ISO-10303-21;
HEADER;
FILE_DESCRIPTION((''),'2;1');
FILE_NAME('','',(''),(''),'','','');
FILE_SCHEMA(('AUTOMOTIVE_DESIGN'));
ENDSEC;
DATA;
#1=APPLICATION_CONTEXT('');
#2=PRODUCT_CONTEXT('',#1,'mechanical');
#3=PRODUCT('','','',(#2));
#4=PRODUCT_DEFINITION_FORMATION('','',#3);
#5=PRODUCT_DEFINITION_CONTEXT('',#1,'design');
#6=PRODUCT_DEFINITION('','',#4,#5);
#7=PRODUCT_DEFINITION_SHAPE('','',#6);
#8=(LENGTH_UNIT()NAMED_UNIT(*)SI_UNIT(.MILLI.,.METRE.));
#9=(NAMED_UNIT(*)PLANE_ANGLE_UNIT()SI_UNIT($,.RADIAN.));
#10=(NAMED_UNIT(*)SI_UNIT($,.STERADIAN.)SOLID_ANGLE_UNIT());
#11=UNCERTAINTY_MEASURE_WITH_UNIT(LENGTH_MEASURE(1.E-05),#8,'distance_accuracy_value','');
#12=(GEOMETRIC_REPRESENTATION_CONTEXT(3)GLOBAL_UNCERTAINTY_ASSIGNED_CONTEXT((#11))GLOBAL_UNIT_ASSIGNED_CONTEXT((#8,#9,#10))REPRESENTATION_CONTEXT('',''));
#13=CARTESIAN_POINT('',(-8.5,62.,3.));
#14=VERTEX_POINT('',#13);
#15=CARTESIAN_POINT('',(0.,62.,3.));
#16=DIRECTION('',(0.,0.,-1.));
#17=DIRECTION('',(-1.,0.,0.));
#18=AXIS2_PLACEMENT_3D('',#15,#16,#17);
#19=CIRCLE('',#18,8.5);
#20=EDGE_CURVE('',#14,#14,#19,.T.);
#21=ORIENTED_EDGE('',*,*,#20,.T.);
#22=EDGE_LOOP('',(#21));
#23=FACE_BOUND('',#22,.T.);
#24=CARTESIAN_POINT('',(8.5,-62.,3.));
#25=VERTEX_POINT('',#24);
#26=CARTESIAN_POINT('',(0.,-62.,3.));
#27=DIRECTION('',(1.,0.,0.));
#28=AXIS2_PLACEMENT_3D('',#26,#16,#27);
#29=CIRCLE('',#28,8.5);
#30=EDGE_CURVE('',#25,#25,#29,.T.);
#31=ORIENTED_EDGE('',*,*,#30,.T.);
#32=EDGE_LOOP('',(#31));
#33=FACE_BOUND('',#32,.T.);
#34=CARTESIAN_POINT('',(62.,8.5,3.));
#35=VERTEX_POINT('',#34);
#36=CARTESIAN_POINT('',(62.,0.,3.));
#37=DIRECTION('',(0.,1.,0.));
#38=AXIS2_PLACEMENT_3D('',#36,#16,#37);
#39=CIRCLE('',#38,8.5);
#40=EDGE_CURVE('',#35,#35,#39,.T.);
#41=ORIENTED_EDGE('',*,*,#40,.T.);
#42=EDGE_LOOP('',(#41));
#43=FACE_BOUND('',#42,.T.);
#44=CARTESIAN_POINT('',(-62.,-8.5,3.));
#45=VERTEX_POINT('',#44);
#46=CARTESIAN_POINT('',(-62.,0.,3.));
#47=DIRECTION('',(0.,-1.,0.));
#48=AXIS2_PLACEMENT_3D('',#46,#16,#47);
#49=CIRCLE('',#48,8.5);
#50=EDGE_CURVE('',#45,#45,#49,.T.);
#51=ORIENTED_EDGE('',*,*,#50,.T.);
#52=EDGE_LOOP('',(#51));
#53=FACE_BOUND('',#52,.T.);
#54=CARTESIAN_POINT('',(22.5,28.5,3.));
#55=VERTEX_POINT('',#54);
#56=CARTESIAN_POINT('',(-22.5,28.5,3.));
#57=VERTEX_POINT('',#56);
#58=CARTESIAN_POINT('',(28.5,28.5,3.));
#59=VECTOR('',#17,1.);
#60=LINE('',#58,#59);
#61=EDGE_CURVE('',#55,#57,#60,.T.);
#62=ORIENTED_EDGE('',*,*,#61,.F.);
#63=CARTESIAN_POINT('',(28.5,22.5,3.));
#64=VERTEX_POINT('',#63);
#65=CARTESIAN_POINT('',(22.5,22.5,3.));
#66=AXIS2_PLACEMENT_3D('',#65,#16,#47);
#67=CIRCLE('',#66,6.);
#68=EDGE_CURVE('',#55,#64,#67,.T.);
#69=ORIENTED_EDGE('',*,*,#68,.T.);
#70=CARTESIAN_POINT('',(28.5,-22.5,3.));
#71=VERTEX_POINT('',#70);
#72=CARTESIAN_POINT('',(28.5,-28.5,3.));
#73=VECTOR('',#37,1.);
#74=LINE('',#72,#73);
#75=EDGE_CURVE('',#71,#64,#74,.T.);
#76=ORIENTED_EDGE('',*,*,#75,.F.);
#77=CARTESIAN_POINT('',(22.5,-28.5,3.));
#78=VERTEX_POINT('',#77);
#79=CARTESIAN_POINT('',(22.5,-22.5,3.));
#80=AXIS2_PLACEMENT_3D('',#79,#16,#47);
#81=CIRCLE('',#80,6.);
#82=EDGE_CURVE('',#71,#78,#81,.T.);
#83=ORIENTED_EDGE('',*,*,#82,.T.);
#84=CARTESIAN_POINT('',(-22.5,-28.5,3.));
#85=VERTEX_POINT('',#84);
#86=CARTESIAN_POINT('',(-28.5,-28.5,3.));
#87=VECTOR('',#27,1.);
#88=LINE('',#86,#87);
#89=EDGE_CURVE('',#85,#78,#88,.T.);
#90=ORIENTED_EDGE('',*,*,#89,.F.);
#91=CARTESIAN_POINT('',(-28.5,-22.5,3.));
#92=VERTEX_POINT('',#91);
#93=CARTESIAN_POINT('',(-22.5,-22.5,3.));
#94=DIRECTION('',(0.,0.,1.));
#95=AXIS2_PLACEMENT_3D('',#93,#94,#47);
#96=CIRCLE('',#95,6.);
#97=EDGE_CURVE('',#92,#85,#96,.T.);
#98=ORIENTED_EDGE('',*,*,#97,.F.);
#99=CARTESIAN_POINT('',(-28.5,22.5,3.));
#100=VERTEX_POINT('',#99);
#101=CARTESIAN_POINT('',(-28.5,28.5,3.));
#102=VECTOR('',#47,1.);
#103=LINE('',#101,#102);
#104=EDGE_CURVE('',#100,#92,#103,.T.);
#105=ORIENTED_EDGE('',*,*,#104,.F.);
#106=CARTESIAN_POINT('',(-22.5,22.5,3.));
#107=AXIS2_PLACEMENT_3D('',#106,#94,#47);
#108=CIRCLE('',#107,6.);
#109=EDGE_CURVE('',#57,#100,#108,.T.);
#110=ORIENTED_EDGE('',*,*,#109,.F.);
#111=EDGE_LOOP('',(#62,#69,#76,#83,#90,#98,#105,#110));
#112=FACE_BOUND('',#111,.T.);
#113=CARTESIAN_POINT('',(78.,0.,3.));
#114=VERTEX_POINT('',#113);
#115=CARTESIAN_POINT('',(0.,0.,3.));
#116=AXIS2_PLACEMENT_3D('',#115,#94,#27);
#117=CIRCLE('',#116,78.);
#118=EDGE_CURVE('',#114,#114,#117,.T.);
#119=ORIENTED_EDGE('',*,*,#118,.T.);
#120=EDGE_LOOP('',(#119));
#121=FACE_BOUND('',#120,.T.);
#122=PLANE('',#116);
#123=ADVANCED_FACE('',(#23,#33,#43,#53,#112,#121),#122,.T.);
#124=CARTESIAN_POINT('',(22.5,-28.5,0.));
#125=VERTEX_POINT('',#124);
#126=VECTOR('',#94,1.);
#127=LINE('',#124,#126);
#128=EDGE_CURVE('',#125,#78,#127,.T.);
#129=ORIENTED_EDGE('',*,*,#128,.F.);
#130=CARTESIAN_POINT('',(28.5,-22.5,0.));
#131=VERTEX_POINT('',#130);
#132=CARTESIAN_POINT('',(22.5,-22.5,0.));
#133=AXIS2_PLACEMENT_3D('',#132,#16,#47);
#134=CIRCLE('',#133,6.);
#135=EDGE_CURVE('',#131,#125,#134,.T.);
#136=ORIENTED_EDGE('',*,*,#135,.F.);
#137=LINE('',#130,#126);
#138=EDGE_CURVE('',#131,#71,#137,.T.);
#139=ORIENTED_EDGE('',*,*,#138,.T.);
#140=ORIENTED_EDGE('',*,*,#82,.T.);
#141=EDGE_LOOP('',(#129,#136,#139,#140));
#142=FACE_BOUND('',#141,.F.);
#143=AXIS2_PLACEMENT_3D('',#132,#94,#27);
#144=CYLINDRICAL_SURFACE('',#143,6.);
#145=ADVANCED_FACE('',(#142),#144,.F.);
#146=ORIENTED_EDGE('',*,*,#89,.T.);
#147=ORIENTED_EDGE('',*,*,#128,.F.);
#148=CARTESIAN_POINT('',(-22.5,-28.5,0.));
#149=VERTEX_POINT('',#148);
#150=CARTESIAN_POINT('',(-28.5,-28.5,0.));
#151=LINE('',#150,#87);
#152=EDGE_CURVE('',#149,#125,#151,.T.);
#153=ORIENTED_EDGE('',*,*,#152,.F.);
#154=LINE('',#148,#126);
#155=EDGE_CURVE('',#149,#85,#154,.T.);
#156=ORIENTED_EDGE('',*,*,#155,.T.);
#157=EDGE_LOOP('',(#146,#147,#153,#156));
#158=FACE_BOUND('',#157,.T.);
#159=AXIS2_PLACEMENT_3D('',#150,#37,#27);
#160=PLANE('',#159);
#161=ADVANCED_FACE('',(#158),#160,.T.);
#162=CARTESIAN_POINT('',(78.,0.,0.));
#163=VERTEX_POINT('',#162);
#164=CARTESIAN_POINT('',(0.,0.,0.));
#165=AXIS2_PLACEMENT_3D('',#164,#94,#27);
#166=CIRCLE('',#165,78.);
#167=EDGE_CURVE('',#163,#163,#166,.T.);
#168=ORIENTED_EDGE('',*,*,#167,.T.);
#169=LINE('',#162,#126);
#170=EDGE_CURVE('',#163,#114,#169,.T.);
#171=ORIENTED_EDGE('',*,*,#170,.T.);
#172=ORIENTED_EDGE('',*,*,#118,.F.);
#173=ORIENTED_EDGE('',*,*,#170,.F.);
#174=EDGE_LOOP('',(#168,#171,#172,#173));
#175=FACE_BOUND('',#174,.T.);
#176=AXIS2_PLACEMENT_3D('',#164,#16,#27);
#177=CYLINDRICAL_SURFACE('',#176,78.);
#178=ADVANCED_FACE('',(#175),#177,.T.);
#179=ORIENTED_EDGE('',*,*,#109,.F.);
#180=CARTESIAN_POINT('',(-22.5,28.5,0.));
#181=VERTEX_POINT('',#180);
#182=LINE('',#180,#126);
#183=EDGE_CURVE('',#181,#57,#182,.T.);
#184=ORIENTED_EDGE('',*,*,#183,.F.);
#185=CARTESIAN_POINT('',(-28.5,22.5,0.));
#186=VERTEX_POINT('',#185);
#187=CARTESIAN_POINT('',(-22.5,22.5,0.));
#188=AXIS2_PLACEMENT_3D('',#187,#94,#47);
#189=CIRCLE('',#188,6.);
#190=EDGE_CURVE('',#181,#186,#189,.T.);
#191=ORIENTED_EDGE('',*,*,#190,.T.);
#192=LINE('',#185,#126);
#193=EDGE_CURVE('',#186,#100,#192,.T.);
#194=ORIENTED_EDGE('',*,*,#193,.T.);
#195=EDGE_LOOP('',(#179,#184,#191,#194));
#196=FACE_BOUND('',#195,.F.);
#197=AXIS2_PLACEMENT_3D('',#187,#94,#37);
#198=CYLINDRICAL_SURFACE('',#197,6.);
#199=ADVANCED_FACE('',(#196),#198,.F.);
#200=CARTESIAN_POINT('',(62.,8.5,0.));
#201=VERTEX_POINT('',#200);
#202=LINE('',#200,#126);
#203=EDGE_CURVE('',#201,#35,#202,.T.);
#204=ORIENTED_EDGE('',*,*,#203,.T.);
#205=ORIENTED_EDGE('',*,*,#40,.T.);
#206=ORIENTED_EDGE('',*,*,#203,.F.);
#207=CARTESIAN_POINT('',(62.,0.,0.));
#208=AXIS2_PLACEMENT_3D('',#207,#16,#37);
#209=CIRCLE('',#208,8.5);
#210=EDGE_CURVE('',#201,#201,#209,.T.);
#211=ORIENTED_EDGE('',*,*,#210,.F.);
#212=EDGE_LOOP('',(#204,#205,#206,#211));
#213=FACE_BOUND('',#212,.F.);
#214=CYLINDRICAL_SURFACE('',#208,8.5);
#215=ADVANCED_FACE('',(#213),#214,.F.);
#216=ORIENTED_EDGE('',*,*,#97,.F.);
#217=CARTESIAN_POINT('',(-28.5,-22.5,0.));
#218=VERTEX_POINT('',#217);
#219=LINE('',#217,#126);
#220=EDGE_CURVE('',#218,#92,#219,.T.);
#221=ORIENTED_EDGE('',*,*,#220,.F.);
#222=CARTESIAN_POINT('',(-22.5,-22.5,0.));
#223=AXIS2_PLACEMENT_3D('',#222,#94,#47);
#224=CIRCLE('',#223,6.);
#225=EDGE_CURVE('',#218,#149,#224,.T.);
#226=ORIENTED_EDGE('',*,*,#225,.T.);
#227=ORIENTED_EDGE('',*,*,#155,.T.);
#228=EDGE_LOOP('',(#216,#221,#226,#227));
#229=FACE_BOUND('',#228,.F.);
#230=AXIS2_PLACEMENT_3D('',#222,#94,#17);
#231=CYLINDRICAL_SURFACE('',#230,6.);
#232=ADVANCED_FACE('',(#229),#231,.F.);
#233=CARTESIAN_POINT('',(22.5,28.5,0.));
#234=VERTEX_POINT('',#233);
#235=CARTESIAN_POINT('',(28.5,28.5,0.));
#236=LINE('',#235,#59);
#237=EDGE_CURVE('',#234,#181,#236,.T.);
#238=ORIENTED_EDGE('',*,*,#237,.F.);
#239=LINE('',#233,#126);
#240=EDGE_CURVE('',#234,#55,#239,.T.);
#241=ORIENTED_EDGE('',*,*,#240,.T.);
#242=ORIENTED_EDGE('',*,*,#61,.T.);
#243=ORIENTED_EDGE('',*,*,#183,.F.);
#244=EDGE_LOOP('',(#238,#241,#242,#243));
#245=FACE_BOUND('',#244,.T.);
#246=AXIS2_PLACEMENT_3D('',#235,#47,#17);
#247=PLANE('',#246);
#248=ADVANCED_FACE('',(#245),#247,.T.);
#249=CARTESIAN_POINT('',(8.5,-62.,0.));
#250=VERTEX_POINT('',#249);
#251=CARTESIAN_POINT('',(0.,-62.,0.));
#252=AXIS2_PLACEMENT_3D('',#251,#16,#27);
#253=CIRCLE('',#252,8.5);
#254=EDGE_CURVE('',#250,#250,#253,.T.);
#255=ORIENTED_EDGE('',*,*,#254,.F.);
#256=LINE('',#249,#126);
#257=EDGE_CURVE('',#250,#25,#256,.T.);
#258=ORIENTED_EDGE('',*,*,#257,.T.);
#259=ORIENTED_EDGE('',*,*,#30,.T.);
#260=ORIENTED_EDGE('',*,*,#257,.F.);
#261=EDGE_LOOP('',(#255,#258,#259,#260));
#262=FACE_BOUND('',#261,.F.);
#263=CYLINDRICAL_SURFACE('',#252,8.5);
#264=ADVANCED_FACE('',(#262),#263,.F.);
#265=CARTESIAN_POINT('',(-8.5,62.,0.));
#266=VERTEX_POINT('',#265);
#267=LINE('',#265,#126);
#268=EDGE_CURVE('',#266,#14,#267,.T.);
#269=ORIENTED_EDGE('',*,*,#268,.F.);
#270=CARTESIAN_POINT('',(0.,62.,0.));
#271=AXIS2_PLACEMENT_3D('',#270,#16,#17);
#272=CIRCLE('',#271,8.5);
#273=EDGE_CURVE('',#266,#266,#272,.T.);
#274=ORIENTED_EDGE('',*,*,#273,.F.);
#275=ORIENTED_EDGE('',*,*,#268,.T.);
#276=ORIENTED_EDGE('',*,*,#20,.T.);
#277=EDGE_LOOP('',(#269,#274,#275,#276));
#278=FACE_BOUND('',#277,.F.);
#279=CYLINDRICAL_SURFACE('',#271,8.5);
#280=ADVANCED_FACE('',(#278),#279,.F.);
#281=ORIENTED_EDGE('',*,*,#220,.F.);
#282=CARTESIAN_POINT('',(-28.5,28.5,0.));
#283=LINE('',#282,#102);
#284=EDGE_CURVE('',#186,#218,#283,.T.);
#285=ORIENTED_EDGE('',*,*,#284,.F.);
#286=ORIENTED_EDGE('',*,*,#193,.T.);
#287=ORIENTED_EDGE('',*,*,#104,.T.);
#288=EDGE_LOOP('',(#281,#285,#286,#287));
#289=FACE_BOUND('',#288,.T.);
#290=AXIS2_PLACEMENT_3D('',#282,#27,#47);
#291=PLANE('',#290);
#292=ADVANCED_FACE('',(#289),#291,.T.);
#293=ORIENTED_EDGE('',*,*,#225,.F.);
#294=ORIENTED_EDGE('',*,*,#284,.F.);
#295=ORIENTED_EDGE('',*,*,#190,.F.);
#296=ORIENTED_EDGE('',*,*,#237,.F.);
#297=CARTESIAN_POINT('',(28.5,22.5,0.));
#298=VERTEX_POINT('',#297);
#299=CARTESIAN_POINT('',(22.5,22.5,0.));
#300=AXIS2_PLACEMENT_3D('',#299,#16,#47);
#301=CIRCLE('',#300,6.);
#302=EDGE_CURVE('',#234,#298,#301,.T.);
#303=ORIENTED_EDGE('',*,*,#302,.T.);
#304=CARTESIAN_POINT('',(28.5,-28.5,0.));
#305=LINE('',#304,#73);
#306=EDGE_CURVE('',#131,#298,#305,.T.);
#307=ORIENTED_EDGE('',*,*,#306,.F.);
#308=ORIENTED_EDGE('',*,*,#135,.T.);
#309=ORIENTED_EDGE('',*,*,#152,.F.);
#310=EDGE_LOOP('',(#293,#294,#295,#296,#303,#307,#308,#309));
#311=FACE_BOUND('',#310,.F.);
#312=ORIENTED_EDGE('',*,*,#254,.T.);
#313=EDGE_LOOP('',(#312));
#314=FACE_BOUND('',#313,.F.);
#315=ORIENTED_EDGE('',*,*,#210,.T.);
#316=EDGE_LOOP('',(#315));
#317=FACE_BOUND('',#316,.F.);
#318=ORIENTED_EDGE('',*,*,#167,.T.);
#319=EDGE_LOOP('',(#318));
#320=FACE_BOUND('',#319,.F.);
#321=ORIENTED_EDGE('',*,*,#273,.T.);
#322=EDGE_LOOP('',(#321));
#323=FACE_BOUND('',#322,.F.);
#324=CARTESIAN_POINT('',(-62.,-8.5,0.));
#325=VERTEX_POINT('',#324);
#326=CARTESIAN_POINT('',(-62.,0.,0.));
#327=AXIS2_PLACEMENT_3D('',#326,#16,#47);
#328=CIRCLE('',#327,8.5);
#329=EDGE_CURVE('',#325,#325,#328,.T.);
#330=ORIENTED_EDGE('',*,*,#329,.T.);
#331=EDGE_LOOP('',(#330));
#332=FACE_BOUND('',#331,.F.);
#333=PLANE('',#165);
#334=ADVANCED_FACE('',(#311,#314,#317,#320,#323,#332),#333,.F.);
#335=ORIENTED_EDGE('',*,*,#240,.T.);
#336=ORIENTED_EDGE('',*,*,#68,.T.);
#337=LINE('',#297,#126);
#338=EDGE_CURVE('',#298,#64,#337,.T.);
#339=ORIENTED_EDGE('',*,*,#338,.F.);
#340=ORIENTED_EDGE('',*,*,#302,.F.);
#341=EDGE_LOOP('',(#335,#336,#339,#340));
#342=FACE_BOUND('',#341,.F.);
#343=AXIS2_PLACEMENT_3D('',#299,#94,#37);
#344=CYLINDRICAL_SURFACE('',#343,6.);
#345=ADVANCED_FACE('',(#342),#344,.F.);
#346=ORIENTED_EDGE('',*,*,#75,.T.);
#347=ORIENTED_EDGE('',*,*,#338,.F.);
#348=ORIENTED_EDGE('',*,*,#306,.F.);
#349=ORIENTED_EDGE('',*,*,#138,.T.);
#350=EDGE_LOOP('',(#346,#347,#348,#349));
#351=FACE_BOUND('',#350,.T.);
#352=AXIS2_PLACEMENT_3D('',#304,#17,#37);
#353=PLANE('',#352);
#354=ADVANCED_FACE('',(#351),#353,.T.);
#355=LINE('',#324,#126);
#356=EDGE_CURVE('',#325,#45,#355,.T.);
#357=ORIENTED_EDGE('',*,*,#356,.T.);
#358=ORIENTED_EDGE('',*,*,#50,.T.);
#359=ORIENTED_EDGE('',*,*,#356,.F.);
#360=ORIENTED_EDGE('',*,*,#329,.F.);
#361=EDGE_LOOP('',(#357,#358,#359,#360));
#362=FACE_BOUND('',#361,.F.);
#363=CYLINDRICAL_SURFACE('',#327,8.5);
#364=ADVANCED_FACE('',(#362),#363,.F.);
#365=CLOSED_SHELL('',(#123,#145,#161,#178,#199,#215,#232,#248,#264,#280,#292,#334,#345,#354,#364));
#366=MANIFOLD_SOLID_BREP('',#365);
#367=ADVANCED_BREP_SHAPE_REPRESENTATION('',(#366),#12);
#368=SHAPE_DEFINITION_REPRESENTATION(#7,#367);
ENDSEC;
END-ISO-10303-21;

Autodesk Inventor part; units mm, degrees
ref_plane "YZ Plane" through (0, 0, 0) normal (1, 0, 0) x (0, 1, 0)
ref_plane "XZ Plane" through (0, 0, 0) normal (0, 1, 0) x (-1, 0, 0)
ref_plane "XY Plane" through (0, 0, 0) normal (0, 0, 1) x (1, 0, 0)
sketch "Sketch1" plane through (0, 0, 0) normal (0, 0, 1) x (1, 0, 0)
  circle A0 centre (0, 0) radius 78
  line L0 (28.5, 28.5) -> (-28.5, 28.5)
  line L1 (-28.5, 28.5) -> (-28.5, -28.5)
  line L2 (-28.5, -28.5) -> (28.5, -28.5)
  line L3 (28.5, -28.5) -> (28.5, 28.5)
  line L4 (28.5, 28.5) -> (-28.5, -28.5) construction
  line L5 (-28.5, 28.5) -> (28.5, -28.5) construction
  dimension "d157" = 156
  dimension "d158" = 57
  dimension "d159" = 57
extrude "Plate5" add sketch "Sketch1" along normal blind 3
sketch "Sketch7" plane through (0, 0, 0) normal (0, 0, -1) x (-1, 0, 0)
  circle A0 centre (0, 62) radius 8.5
  point P0 (0, 0)
  dimension "d160" = 17
  dimension "d161" = 62
extrude "Cut1" cut sketch "Sketch7" against normal blind 3
pattern_circular "Circular Pattern1" count 4 over 360 about axis through (0, 0, -10) along (0, 0, 1) of "Cut1"
fillet "Corner Round1" radius 6 4 edges at (-28.5, -28.5, 1.5) (28.5, -28.5, 1.5) (28.5, 28.5, 1.5) (-28.5, 28.5, 1.5)
properties part number "PNS 1757 FDS 1200x50 FLANGE" material "Stainless Steel"
